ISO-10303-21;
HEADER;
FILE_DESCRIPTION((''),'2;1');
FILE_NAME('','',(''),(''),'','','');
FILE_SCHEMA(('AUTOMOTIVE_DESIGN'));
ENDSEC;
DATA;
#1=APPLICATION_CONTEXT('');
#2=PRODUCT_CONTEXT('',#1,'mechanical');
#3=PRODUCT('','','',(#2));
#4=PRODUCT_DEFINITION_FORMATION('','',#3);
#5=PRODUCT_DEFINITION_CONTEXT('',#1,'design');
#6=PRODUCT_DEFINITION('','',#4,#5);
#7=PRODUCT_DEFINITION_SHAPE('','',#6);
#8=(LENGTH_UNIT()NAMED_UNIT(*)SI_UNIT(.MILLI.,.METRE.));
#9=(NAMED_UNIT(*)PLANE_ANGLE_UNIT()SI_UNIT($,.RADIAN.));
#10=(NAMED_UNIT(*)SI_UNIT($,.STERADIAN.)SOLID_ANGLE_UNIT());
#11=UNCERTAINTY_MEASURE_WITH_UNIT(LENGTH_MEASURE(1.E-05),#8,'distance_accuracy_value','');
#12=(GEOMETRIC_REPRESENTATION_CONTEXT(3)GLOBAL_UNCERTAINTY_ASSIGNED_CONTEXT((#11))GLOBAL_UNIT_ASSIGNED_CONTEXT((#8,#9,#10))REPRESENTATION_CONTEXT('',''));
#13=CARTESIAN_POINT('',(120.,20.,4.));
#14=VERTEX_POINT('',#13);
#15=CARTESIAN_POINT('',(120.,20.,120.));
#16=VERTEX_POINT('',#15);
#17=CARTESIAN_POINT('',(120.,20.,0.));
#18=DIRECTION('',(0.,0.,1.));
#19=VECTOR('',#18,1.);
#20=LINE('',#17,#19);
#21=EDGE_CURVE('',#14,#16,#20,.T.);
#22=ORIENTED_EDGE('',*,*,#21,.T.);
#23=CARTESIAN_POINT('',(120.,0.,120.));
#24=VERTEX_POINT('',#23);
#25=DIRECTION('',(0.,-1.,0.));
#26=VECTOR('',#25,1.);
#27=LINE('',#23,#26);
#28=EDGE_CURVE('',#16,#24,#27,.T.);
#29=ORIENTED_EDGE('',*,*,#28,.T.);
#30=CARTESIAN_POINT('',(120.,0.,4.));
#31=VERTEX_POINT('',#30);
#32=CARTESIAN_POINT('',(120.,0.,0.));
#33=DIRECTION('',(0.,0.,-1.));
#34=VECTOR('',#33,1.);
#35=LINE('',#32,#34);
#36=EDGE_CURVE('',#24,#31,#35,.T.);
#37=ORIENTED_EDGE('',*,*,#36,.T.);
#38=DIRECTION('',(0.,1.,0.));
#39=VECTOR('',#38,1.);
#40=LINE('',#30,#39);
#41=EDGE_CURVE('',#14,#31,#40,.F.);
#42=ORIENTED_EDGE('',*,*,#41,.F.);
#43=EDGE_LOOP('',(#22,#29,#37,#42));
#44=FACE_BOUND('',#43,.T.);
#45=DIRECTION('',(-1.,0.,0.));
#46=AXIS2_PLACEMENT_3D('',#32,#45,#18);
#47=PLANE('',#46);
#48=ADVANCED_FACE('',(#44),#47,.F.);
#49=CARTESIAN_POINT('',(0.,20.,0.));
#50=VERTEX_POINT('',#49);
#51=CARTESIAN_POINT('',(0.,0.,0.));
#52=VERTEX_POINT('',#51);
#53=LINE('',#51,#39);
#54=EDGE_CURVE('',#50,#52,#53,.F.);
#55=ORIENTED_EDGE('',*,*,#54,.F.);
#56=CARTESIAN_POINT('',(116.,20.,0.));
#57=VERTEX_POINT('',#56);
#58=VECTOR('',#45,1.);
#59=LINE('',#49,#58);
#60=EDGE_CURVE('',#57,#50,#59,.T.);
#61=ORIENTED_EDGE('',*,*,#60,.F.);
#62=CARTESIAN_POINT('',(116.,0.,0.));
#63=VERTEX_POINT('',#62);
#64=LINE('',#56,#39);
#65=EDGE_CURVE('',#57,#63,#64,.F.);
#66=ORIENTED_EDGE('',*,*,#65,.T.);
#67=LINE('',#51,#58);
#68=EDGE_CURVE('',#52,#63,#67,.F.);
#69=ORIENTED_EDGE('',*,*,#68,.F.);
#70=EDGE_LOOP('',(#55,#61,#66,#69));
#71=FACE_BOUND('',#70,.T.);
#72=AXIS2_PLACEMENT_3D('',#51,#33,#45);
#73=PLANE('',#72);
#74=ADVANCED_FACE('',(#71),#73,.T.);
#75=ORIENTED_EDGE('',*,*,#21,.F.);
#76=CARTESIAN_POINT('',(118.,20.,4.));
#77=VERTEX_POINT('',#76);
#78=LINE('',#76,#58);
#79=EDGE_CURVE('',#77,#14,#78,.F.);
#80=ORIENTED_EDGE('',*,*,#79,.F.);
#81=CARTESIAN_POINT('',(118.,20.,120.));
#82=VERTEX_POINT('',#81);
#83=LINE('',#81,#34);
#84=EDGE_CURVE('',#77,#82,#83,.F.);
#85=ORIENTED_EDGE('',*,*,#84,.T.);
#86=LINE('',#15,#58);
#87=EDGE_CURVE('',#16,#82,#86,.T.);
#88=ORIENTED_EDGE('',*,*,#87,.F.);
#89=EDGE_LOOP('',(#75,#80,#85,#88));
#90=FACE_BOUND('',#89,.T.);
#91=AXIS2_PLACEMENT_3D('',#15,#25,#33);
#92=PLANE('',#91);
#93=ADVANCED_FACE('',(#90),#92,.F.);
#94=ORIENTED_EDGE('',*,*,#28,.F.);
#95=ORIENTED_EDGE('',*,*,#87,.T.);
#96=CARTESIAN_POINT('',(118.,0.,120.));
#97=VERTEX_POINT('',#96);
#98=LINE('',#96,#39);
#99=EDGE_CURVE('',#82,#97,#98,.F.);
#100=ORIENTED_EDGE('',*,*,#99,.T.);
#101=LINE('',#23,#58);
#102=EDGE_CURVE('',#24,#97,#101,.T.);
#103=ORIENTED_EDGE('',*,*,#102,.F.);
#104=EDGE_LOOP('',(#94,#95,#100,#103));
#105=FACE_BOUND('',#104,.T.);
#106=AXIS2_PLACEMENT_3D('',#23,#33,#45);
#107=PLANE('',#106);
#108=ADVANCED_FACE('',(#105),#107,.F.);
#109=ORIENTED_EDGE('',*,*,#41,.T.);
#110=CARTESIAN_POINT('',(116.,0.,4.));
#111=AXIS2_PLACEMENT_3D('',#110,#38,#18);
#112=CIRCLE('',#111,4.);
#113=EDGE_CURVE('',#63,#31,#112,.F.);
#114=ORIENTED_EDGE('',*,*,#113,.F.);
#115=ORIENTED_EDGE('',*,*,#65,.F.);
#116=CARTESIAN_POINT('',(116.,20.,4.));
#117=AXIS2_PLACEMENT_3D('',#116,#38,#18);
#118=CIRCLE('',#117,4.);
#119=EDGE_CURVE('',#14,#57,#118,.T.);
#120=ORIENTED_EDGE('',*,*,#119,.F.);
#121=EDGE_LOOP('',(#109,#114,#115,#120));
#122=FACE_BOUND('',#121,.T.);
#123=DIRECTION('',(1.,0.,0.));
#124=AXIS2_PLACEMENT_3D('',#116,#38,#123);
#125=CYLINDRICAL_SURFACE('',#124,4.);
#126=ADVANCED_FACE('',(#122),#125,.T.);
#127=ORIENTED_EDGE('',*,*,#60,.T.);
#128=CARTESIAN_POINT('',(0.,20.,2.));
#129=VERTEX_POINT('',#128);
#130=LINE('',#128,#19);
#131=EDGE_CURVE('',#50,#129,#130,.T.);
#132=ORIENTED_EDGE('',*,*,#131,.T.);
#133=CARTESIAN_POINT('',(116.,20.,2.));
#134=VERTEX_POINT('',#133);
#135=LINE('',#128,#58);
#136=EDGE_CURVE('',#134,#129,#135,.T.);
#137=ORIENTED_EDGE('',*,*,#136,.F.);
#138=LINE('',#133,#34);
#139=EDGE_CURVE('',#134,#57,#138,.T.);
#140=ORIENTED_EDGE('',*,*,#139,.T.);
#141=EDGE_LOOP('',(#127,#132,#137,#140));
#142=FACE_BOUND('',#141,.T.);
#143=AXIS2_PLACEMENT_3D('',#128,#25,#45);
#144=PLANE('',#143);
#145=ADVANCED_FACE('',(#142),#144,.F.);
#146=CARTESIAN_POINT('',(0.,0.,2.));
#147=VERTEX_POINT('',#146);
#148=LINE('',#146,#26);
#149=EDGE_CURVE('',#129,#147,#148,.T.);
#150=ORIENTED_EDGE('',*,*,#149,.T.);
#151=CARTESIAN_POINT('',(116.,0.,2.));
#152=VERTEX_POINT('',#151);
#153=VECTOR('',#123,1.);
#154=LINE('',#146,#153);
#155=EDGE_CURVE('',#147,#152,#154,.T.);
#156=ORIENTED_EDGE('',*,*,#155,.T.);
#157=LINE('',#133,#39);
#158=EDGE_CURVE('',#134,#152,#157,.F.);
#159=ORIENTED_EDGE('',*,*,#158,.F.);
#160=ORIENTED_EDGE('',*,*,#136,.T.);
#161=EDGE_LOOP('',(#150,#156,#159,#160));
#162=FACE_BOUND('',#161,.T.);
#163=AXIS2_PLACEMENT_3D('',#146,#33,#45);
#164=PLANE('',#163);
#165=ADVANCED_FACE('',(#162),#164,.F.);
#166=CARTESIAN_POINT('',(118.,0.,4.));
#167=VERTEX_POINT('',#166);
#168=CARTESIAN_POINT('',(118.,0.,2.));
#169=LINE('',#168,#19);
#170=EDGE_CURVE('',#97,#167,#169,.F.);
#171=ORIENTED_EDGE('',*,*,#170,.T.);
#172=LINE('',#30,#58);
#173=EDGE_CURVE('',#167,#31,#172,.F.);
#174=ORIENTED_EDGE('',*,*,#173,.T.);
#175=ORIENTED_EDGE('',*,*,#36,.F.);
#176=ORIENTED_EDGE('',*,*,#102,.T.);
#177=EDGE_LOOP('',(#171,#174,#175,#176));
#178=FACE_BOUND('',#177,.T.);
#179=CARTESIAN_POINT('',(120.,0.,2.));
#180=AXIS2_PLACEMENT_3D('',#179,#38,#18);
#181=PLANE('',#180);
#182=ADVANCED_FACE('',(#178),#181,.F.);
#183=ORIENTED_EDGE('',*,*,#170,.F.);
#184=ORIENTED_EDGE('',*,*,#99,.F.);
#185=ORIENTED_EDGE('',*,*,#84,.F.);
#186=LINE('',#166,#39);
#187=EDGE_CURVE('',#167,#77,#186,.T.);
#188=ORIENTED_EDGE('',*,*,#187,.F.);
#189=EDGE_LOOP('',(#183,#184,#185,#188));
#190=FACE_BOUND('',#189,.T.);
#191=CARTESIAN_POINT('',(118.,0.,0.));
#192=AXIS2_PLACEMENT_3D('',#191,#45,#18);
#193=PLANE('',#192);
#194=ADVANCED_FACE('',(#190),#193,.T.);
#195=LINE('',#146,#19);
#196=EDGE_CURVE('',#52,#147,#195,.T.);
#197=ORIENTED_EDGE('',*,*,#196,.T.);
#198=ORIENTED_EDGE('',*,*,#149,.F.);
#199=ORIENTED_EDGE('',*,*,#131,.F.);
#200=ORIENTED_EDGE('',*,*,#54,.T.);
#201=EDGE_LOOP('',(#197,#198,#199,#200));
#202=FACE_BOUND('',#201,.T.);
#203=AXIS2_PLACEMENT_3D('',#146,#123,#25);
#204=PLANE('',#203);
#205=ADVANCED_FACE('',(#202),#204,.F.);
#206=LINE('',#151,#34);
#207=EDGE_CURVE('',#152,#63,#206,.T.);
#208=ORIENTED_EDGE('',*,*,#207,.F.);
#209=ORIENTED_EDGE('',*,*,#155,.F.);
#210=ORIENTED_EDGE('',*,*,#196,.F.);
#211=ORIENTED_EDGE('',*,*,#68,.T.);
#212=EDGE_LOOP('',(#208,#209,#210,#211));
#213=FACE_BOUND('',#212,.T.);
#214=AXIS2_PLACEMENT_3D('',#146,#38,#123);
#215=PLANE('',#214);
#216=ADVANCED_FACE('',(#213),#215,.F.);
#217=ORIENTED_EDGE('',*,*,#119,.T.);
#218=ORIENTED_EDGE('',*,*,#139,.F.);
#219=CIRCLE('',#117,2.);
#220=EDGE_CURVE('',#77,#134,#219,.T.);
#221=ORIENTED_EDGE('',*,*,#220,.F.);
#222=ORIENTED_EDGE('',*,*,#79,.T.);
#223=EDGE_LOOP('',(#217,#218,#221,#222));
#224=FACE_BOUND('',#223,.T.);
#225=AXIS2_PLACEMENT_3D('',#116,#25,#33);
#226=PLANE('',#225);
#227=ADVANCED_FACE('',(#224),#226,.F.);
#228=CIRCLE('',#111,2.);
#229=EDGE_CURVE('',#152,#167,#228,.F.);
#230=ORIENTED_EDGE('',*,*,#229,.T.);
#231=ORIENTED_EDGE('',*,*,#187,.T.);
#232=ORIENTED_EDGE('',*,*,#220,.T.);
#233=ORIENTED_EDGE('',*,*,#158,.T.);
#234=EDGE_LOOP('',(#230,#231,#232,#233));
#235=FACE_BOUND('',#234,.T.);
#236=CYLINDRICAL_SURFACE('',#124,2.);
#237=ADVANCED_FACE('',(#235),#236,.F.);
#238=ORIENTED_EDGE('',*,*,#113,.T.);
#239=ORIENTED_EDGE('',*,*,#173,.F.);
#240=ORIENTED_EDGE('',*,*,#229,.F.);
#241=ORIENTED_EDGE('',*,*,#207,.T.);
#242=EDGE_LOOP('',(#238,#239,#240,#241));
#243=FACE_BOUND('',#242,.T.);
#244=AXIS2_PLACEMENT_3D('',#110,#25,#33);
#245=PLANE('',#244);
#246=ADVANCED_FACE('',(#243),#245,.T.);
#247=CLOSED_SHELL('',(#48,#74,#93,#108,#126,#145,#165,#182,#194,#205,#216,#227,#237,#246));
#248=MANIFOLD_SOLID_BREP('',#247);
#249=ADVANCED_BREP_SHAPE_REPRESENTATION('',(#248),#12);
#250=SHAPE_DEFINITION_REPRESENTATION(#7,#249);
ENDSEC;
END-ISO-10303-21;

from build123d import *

# Parameters (mm, degrees)
SKETCH_1_W                       = 120
SKETCH_1_H                       = 20
EXTRUDE_2_DEPTH                  = 2
SM_EDGE_FLANGE_2_STRIP_W         = 12
SM_EDGE_FLANGE_2_STRIP_H         = 2
SM_EDGE_FLANGE_2_STRIP_CUT_DEPTH = 20
SM_EDGE_FLANGE_2_DEPTH           = 20


# Sheet-metal steps are written as plain solids
with BuildPart() as part:
    # Эскиз1 → Бобышка-Вытянуть2 (new body)
    with BuildSketch(Plane.XY):
        with Locations((60, 10)):
            Rectangle(SKETCH_1_W, SKETCH_1_H)
    extrude(amount=EXTRUDE_2_DEPTH)

    # Ребро-кромка2 strip (across the edge) → Ребро-кромка2 strip cut (cut)
    with BuildSketch(Plane(origin=(120, 0, 2), x_dir=(-1, 0, 0), z_dir=(0, 1, 0))):
        with Locations((-2, -1)):
            Rectangle(SM_EDGE_FLANGE_2_STRIP_W, SM_EDGE_FLANGE_2_STRIP_H)
    extrude(amount=SM_EDGE_FLANGE_2_STRIP_CUT_DEPTH, mode=Mode.SUBTRACT)

    # Ребро-кромка2 section (across the edge) → Ребро-кромка2 (add)
    with BuildSketch(Plane(origin=(120, 0, 2), x_dir=(-1, 0, 0), z_dir=(0, 1, 0))):
        with BuildLine():
            Line((0, 2), (0, 118))
            Line((0, 118), (2, 118))
            Line((2, 118), (2, 2))
            ThreePointArc((2, 2), (2.585786438, 0.585786438), (4, 0))
            Line((4, 0), (4, -2))
            ThreePointArc((4, -2), (1.171572875, -0.828427125), (0, 2))
        make_face()
    extrude(amount=SM_EDGE_FLANGE_2_DEPTH)


solid = part.part
